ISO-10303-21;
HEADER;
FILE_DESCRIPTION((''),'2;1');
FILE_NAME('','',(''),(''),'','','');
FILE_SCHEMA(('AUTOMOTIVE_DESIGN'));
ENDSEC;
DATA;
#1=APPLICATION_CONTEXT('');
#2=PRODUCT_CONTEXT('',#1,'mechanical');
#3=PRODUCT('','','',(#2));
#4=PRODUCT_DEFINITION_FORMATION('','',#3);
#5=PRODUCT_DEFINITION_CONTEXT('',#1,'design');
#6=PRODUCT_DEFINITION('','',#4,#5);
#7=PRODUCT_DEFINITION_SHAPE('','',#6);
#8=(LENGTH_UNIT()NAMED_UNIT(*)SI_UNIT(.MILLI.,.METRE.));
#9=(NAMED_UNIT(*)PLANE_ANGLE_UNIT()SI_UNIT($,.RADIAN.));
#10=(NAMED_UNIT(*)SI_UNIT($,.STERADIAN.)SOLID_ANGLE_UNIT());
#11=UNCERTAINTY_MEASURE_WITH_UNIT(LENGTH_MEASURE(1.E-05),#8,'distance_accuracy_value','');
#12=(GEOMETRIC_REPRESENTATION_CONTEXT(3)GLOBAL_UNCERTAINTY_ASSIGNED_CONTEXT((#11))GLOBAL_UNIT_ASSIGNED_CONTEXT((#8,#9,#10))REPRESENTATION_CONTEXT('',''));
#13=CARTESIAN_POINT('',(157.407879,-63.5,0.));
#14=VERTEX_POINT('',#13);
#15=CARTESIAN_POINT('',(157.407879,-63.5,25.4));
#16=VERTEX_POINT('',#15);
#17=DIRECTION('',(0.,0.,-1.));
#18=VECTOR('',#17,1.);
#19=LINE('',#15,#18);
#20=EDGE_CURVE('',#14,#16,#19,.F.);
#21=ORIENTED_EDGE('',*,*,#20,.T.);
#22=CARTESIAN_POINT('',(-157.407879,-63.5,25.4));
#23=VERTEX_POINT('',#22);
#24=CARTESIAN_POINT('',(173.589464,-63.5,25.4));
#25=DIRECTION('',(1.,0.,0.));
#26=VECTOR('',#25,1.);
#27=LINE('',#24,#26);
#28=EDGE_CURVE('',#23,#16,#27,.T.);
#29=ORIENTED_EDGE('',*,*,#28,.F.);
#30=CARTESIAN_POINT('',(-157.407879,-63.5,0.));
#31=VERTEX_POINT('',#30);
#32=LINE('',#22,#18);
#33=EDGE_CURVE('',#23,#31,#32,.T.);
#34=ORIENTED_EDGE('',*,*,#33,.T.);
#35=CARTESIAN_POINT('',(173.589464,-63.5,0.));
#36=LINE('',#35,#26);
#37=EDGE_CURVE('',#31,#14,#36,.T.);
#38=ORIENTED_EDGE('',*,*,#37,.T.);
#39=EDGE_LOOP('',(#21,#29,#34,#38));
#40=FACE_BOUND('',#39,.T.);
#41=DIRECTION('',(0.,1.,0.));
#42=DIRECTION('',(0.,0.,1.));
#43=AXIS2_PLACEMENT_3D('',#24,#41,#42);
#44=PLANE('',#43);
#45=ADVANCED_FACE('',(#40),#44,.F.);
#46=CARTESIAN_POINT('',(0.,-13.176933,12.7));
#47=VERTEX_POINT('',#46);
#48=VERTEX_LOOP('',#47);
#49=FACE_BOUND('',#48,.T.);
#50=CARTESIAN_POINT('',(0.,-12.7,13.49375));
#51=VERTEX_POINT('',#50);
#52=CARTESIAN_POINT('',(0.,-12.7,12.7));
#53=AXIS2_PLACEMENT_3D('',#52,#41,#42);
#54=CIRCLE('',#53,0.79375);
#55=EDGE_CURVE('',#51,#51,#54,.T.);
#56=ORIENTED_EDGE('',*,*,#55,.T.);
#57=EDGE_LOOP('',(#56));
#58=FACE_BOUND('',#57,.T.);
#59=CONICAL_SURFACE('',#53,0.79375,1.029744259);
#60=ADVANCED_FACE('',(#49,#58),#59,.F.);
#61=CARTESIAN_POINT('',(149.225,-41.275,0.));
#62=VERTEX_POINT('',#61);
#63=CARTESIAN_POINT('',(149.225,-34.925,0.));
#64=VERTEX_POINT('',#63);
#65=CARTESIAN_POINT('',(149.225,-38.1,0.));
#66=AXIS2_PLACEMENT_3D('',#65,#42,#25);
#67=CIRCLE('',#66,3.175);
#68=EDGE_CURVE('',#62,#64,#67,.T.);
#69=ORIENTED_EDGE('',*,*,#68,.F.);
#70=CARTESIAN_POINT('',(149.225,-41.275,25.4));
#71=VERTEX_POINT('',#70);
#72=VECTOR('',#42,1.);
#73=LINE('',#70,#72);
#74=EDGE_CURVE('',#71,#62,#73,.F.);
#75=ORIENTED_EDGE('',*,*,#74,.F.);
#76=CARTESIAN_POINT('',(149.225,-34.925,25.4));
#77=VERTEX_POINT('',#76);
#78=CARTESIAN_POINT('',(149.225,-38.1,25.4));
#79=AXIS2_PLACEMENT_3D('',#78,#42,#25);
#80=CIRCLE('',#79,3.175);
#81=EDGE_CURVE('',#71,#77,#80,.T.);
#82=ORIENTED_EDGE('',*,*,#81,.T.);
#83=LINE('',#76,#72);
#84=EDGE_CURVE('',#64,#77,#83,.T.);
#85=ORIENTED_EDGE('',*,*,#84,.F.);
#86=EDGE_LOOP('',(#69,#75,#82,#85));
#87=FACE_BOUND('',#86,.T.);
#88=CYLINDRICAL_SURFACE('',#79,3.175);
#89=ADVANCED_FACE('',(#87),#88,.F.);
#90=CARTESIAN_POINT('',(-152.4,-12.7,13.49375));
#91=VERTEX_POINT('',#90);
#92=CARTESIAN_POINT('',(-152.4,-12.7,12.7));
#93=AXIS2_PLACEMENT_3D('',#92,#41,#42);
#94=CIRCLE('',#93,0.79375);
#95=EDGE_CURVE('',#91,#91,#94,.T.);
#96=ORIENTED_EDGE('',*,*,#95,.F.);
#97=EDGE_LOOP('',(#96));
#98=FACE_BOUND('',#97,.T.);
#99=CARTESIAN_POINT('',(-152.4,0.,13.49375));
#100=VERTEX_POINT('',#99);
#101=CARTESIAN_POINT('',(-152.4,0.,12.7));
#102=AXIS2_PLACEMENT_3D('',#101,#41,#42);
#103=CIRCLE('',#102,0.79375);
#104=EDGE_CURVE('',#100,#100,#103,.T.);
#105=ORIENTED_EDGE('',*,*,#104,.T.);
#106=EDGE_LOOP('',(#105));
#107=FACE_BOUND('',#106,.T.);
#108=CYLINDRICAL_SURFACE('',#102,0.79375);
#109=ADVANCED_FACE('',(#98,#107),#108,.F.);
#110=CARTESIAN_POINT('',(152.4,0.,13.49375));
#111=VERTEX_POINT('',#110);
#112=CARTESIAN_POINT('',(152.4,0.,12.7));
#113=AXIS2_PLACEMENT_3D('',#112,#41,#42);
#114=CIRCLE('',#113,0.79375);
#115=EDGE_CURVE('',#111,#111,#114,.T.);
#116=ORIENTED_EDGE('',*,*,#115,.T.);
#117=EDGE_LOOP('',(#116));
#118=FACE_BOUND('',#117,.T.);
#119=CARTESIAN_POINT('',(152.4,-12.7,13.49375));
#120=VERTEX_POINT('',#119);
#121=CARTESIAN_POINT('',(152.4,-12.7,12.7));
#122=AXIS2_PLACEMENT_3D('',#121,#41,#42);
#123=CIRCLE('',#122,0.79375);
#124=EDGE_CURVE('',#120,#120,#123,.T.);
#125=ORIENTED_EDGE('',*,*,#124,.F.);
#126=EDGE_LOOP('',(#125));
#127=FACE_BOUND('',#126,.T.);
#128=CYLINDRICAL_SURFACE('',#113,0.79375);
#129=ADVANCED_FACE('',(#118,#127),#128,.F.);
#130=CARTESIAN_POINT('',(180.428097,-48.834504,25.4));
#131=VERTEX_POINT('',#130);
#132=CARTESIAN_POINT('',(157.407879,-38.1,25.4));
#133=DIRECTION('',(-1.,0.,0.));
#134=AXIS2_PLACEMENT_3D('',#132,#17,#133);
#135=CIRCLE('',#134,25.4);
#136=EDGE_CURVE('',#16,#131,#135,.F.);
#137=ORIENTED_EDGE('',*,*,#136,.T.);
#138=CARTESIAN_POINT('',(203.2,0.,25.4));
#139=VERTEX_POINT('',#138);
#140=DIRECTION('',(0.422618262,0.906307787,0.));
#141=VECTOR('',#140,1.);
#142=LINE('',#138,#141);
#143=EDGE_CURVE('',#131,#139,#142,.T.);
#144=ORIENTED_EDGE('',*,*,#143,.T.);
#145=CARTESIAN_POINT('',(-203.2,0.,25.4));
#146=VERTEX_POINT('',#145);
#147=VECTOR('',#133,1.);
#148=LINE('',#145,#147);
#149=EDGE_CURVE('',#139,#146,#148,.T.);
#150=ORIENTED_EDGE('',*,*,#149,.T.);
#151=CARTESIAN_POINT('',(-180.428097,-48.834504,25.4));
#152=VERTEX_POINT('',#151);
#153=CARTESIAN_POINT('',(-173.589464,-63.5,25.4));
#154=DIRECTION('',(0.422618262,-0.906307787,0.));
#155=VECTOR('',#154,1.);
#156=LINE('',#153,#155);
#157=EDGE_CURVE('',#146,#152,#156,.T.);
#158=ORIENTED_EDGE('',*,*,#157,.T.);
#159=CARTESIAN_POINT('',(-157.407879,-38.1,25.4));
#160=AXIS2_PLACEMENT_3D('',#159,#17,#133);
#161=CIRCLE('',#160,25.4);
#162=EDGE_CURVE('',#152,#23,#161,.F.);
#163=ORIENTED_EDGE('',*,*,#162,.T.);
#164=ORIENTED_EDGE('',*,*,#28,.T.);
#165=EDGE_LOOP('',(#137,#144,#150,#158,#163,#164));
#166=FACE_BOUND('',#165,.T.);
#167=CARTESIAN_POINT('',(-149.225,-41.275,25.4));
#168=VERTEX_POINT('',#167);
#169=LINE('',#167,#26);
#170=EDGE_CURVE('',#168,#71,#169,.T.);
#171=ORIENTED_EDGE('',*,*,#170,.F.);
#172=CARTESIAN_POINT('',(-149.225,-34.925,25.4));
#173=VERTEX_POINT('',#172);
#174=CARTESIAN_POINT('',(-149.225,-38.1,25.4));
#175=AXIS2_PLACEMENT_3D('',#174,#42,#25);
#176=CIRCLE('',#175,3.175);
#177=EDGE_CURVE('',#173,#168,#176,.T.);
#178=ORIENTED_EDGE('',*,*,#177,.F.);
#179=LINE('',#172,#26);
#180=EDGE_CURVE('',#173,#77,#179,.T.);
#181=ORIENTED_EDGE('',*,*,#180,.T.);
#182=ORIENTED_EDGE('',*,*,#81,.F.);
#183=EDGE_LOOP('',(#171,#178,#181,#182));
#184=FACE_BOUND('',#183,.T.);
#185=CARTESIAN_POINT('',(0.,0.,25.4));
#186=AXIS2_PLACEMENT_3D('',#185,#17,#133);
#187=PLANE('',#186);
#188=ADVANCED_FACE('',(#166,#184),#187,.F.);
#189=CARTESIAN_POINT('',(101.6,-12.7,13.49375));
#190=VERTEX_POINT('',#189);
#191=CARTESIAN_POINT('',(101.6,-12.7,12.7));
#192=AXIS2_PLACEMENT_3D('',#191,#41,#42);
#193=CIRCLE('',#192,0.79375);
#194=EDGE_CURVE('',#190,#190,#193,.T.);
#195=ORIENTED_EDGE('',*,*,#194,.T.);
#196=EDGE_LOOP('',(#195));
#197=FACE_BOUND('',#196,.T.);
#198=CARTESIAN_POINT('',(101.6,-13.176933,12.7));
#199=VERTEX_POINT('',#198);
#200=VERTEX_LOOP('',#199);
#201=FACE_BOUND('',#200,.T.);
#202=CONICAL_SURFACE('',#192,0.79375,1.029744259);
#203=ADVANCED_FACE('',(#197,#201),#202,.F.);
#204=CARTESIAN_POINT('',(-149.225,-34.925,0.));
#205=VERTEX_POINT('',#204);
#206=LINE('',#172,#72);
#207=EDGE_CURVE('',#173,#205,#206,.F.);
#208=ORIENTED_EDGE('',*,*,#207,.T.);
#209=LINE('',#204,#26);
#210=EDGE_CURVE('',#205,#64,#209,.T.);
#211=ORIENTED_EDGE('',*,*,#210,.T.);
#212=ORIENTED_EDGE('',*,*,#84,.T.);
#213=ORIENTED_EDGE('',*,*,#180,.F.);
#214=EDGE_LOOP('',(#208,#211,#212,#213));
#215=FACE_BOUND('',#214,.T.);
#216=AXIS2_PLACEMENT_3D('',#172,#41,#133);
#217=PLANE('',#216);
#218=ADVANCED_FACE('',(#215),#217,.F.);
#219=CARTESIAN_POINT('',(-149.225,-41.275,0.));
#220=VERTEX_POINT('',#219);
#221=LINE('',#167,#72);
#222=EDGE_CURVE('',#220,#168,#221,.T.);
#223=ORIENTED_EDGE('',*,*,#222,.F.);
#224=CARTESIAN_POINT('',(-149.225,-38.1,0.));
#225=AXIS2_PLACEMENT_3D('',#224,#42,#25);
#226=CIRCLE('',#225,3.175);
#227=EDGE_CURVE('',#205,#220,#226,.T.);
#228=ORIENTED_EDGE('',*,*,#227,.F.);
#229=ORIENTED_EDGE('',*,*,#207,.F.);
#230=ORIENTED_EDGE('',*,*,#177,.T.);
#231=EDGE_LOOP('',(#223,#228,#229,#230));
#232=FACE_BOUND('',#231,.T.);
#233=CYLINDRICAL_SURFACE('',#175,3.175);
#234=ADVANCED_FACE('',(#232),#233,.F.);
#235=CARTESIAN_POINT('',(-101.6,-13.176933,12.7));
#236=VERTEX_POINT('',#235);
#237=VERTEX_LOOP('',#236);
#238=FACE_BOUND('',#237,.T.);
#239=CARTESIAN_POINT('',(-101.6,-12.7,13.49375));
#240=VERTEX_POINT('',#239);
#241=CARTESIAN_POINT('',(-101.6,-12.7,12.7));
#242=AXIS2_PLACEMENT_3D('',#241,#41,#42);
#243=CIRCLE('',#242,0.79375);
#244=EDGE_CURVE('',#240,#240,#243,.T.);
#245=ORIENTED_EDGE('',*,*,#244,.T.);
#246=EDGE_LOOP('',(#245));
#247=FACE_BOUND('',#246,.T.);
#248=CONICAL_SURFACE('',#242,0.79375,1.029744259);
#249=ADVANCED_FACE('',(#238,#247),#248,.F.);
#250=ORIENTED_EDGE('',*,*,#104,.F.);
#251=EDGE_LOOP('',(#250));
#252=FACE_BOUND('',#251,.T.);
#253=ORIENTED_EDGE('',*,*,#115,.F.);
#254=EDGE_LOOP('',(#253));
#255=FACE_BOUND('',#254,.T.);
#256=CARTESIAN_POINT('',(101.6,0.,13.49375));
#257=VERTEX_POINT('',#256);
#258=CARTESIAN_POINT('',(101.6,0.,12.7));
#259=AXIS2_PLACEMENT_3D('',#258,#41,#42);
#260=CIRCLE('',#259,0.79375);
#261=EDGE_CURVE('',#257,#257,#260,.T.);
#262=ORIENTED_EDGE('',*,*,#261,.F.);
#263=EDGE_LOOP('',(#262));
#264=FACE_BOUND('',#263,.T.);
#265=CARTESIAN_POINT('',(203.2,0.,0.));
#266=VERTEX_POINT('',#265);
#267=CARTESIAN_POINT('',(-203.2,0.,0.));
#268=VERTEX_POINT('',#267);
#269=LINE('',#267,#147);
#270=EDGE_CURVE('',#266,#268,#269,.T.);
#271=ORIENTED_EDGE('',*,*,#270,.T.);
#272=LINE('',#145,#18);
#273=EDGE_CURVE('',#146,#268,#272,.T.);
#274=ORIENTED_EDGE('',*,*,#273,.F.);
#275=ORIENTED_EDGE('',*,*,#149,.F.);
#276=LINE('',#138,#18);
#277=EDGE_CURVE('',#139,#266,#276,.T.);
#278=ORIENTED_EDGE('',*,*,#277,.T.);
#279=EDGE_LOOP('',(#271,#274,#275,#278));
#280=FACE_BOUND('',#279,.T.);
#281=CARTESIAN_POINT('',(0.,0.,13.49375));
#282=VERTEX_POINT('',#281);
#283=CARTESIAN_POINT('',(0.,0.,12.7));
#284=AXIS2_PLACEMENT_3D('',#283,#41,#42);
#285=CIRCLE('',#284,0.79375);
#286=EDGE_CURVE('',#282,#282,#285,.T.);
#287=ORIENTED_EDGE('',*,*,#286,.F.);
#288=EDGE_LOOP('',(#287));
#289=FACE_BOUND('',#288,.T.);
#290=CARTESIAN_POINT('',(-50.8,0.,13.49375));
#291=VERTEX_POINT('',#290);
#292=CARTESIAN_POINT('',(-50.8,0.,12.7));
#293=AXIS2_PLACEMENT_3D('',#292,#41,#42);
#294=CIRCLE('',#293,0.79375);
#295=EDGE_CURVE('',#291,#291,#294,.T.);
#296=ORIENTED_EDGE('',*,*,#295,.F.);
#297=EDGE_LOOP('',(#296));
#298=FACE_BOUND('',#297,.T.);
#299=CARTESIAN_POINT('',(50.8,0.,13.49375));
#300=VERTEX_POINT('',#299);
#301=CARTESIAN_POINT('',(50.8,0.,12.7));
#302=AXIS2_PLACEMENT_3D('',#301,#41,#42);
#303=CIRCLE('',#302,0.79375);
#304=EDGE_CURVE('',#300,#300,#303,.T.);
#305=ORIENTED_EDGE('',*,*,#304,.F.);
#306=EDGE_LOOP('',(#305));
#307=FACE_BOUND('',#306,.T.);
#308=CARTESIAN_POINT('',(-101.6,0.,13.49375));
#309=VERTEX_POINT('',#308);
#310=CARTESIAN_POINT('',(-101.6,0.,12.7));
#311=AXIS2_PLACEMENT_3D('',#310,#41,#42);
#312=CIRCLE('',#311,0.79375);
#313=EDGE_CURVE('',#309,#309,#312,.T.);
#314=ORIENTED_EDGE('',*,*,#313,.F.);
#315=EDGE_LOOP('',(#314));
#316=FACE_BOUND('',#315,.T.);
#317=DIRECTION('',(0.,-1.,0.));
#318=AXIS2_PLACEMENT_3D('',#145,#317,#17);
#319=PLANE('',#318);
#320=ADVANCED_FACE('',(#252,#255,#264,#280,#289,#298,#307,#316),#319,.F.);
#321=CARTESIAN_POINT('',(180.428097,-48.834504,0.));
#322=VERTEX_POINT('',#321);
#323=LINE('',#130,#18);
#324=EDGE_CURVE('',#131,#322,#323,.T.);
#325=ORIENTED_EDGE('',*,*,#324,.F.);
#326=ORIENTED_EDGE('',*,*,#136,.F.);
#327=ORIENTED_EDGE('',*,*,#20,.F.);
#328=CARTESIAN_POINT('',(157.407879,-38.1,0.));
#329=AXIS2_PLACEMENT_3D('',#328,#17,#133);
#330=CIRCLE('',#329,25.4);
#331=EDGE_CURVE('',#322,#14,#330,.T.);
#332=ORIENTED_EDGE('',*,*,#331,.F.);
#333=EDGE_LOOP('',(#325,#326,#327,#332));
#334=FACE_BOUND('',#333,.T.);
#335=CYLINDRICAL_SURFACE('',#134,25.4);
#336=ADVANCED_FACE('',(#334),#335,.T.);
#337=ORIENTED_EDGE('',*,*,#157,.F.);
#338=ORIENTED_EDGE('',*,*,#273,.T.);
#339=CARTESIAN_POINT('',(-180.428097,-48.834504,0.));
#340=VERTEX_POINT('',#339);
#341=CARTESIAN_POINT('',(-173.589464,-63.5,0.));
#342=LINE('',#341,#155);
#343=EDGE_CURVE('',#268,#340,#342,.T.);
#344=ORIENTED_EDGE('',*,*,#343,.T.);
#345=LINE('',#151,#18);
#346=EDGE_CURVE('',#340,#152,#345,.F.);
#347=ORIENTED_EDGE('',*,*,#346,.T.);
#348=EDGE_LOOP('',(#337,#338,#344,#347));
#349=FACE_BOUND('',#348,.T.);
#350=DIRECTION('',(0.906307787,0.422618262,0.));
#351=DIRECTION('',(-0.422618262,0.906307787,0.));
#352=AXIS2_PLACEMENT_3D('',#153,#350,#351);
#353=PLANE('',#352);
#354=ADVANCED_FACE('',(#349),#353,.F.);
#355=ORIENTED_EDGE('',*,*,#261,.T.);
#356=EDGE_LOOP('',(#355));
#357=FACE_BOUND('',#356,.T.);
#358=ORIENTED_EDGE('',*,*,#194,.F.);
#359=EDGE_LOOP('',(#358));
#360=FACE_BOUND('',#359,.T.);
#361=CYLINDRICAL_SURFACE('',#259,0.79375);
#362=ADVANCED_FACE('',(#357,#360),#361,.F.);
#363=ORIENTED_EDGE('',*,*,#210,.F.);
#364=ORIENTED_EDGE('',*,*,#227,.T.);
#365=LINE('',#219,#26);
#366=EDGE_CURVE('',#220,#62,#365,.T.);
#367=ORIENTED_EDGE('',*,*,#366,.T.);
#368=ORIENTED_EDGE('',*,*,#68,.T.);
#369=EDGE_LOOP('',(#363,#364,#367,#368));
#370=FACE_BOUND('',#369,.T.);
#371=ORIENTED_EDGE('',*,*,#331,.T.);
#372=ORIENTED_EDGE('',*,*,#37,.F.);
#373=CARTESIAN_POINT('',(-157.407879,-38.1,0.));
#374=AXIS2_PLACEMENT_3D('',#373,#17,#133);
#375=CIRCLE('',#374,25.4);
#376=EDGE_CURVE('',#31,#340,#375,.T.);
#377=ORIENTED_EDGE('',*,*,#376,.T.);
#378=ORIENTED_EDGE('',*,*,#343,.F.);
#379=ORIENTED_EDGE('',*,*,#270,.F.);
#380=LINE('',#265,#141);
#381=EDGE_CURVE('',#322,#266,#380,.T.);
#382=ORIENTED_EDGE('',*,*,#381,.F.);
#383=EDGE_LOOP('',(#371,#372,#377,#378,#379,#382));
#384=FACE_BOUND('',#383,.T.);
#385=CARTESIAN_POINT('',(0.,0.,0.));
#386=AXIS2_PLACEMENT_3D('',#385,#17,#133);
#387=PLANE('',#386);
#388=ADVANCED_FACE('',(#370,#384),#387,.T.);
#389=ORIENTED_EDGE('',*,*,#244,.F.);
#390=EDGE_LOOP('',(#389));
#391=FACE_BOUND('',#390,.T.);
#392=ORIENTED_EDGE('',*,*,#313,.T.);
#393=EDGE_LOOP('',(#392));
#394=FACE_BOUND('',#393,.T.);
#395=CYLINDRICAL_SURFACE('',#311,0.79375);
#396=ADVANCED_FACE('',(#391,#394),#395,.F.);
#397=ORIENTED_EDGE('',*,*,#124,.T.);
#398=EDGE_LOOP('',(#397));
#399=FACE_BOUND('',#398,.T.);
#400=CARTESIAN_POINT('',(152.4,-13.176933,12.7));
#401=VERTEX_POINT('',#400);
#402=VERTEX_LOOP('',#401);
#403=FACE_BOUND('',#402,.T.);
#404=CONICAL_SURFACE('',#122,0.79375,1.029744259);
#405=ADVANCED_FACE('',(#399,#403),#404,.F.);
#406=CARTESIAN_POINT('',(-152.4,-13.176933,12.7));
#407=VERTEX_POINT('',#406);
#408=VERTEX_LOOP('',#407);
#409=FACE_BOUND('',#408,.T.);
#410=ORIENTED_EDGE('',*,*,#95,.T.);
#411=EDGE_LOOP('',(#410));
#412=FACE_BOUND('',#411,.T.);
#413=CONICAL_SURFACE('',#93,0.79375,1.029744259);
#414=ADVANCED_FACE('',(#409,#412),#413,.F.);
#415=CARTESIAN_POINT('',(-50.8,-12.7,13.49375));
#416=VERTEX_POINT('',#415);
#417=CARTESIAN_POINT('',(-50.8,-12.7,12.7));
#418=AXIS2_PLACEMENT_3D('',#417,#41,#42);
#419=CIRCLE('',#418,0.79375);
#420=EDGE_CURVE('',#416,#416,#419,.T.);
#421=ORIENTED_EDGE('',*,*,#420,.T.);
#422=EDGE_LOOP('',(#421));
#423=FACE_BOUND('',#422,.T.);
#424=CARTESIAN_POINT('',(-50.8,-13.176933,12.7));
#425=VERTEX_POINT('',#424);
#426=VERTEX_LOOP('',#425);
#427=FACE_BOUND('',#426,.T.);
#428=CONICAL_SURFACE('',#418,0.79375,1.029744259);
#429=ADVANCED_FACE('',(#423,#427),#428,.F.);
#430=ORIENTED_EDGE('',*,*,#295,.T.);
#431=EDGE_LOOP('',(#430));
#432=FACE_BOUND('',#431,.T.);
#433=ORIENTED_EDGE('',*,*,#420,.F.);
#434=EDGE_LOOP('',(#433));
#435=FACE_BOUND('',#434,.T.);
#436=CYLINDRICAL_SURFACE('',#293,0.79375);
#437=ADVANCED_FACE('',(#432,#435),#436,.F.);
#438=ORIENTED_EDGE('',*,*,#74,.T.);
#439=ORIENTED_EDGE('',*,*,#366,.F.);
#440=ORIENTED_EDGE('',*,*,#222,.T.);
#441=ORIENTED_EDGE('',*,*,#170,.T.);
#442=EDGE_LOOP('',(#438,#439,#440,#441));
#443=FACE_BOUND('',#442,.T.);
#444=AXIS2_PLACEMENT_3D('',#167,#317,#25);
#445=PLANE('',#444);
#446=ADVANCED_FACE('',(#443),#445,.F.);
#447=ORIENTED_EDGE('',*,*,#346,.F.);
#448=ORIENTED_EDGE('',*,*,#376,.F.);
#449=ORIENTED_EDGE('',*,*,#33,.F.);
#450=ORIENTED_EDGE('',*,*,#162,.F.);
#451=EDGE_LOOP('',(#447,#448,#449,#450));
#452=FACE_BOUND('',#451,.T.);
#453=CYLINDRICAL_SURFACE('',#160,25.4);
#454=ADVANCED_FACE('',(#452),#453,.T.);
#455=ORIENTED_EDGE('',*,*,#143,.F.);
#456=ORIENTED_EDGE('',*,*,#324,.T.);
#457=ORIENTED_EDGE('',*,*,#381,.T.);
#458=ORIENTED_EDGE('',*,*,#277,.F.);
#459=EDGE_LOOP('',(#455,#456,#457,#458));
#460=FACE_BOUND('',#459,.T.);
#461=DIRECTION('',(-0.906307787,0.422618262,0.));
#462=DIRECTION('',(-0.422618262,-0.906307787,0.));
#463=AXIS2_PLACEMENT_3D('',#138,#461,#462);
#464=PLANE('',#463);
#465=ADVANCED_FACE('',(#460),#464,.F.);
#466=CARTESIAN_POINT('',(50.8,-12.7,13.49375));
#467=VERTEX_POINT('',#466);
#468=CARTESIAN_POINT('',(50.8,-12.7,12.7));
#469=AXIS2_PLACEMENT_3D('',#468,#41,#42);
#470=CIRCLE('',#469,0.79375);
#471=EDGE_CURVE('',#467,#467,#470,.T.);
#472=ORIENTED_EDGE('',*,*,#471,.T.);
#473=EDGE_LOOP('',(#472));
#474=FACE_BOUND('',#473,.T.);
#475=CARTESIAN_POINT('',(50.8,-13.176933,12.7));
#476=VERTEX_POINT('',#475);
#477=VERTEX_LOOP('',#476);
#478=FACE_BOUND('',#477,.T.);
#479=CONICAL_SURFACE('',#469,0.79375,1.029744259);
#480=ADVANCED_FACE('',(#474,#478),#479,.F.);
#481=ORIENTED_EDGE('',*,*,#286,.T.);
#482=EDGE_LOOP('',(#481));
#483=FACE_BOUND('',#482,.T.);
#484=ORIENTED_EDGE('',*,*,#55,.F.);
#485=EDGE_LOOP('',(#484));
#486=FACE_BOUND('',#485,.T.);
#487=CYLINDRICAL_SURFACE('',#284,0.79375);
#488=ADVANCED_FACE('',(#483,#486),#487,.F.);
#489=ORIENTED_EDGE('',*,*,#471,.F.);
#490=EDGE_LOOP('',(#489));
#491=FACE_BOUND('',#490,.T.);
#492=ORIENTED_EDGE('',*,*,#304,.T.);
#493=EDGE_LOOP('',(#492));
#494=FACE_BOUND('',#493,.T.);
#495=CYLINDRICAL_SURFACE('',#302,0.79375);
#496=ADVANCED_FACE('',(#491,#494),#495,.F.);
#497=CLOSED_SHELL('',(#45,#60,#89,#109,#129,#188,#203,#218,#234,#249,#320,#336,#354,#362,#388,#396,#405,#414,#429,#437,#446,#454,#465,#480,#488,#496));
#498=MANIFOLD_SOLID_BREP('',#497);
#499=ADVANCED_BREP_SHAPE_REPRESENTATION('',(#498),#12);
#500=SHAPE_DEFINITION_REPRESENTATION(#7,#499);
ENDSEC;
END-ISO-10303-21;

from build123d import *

# Parameters (mm, degrees)
BOSS_EXTRUDE1_DEPTH                = 25.4
FILLET1_R                          = 25.4
F_1_4_0_25_DIAMETER_SLOT1_DEPTH    = 25.4
F_1_16_0_0625_DIAMETER_HOLE1_D     = 1.5875
F_1_16_0_0625_DIAMETER_HOLE1_DEPTH = 12.7
F_1_16_0_0625_DIAMETER_HOLE1_TIP   = 0.476933116


# Read off the part's stored shape, not the designer's step: 1/4 (0.25) Diameter Slot1
with BuildPart() as part:
    # Sketch1 → Boss-Extrude1 (new body)
    with BuildSketch(Plane.XY):
        Polygon((-203.2, 0), (203.2, 0), (173.589463707, -63.5), (-173.589463707, -63.5), align=None)
    extrude(amount=BOSS_EXTRUDE1_DEPTH)

    # Fillet1
    fillet1_edges = [part.edges().sort_by_distance(p)[0] for p in [
        (173.589463707, -63.5, 12.7),
        (-173.589463707, -63.5, 12.7),
    ]]
    fillet(fillet1_edges, radius=FILLET1_R)

    # 1/4 (0.25) Diameter Slot1 outline → 1/4 (0.25) Diameter Slot1 (cut)
    with BuildSketch(Plane.XY):
        with BuildLine():
            Line((-149.225, -41.275), (149.225, -41.275))
            ThreePointArc((149.225, -41.275), (152.4, -38.1), (149.225, -34.925))
            Line((149.225, -34.925), (-149.225, -34.925))
            ThreePointArc((-149.225, -34.925), (-152.4, -38.1), (-149.225, -41.275))
        make_face()
    extrude(amount=F_1_4_0_25_DIAMETER_SLOT1_DEPTH, mode=Mode.SUBTRACT)

    # 1/16 (0.0625) Diameter Hole1
    with Locations(Plane(origin=(0, 0, 0), x_dir=(1, 0, 0), z_dir=(0, 1, 0))):
        with Locations((-152.4, -12.7), (-101.6, -12.7), (-50.8, -12.7), (0, -12.7), (50.8, -12.7), (101.6, -12.7), (152.4, -12.7)):
            Hole(F_1_16_0_0625_DIAMETER_HOLE1_D / 2, depth=F_1_16_0_0625_DIAMETER_HOLE1_DEPTH)
            with Locations((0, 0, -(F_1_16_0_0625_DIAMETER_HOLE1_DEPTH + F_1_16_0_0625_DIAMETER_HOLE1_TIP / 2))):  # 118° drill point
                Cone(0, F_1_16_0_0625_DIAMETER_HOLE1_D / 2, F_1_16_0_0625_DIAMETER_HOLE1_TIP, mode=Mode.SUBTRACT)


solid = part.part
